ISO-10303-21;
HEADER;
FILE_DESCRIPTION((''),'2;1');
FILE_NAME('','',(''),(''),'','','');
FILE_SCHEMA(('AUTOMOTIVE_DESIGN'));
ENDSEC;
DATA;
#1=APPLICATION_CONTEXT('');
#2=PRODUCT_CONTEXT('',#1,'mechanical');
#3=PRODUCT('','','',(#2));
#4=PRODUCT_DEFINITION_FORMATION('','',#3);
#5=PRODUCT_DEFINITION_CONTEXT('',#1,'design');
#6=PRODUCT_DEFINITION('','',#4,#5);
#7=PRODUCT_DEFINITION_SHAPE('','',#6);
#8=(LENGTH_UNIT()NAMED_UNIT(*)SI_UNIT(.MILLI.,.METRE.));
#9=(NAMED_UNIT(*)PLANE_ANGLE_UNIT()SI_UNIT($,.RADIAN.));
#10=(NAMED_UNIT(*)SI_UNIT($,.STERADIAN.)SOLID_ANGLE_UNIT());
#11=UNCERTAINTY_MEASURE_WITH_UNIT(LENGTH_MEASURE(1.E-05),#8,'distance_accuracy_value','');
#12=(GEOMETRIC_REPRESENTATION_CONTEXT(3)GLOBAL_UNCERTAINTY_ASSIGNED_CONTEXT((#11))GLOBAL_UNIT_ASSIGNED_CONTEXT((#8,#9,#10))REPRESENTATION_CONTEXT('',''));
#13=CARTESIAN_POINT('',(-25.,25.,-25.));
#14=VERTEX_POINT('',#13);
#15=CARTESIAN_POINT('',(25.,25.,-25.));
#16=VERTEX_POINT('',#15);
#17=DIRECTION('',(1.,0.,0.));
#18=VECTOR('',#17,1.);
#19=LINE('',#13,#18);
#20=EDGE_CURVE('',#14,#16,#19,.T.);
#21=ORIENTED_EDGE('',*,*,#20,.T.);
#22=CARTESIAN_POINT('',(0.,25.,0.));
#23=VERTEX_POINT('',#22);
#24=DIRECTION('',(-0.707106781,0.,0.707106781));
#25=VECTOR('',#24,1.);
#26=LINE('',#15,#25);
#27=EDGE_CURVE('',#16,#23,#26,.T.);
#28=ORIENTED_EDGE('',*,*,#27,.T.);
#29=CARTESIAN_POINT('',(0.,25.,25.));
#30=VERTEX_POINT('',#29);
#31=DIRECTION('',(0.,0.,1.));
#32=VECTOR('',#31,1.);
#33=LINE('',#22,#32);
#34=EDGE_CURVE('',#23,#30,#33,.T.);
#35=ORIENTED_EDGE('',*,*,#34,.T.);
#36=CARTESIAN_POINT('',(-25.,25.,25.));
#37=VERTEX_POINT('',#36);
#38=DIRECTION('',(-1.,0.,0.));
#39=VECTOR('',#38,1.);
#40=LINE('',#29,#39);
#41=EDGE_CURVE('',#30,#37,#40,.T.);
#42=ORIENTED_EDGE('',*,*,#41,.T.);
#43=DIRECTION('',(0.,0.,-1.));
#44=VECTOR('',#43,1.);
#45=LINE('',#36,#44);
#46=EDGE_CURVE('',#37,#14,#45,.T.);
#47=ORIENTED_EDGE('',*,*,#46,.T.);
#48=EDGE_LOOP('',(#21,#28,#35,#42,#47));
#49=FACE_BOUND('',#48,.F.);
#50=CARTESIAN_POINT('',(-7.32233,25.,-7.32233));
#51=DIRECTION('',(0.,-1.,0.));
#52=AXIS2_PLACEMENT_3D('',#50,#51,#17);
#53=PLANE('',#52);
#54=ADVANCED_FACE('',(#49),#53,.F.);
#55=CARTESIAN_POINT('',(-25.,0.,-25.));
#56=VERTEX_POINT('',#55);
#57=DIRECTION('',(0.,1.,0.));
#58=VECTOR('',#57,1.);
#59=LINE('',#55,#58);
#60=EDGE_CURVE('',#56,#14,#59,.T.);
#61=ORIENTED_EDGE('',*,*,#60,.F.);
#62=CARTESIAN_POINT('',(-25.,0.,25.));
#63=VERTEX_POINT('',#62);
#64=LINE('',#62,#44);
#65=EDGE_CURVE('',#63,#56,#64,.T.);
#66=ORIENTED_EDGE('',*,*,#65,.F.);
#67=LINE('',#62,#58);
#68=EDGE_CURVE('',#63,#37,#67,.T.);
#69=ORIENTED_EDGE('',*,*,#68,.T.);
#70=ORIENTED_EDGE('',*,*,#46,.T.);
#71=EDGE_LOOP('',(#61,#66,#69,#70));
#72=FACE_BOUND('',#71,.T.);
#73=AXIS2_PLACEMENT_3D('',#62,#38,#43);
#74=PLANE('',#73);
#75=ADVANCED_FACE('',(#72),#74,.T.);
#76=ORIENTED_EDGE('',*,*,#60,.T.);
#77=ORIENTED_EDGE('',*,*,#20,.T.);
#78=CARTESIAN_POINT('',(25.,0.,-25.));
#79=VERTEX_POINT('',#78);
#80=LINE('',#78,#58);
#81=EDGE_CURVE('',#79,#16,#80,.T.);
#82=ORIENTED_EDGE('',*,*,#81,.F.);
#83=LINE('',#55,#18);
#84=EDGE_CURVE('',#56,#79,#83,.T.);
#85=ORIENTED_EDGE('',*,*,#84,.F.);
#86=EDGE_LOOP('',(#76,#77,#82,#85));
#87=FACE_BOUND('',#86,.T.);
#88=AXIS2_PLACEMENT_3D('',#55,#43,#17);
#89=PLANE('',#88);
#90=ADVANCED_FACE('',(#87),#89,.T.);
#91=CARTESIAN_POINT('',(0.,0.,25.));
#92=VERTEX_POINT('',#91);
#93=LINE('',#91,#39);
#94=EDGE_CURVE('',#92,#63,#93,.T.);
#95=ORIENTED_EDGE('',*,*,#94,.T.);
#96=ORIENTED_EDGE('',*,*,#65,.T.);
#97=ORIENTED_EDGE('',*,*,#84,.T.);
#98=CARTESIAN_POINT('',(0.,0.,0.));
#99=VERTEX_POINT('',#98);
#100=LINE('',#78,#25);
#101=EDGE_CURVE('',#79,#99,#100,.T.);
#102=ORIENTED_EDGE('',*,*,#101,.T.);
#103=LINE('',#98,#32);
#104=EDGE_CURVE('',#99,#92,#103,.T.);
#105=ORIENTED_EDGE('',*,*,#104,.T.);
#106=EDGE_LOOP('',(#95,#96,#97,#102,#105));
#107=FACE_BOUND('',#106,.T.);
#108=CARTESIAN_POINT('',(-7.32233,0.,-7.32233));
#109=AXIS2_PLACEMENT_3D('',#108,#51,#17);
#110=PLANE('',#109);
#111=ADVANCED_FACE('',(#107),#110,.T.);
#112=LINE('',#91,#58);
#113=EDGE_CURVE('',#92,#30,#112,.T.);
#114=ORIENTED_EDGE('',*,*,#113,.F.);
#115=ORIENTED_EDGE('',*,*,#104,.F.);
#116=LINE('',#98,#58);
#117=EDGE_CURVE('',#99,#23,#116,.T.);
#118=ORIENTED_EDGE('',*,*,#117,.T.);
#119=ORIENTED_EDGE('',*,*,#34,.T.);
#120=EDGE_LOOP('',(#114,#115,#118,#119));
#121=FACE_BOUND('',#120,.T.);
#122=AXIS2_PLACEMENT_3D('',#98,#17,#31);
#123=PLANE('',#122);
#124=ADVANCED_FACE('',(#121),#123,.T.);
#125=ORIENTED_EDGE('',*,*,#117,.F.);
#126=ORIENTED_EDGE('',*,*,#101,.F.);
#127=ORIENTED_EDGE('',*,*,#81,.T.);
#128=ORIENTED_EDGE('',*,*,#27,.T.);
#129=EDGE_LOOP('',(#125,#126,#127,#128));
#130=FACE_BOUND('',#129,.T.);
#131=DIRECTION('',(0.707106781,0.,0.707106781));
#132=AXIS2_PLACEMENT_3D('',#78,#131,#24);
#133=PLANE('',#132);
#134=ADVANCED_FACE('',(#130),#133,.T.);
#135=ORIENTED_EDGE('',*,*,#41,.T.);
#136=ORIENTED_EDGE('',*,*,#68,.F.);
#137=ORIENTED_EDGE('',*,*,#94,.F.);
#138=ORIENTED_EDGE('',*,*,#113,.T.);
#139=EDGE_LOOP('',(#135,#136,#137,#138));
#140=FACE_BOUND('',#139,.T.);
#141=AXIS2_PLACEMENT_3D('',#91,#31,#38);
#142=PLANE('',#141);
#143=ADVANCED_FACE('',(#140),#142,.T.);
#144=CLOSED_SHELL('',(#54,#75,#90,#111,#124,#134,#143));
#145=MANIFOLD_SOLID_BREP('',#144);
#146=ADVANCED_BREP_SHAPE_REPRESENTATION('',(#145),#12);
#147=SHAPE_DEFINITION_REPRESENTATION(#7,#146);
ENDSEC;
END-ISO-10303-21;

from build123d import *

# Parameters (mm, degrees)
F1_DEPTH = 25


with BuildPart() as f1:
    # F0 (on Front) → F1 (new body)
    with BuildSketch(Plane.XZ):
        Polygon((0, 0), (-25, 25), (-25, -25), (25, -25), align=None)
        Polygon((0, 25), (-25, 25), (0, 0), align=None)
    extrude(amount=-F1_DEPTH)


solid = f1.part
